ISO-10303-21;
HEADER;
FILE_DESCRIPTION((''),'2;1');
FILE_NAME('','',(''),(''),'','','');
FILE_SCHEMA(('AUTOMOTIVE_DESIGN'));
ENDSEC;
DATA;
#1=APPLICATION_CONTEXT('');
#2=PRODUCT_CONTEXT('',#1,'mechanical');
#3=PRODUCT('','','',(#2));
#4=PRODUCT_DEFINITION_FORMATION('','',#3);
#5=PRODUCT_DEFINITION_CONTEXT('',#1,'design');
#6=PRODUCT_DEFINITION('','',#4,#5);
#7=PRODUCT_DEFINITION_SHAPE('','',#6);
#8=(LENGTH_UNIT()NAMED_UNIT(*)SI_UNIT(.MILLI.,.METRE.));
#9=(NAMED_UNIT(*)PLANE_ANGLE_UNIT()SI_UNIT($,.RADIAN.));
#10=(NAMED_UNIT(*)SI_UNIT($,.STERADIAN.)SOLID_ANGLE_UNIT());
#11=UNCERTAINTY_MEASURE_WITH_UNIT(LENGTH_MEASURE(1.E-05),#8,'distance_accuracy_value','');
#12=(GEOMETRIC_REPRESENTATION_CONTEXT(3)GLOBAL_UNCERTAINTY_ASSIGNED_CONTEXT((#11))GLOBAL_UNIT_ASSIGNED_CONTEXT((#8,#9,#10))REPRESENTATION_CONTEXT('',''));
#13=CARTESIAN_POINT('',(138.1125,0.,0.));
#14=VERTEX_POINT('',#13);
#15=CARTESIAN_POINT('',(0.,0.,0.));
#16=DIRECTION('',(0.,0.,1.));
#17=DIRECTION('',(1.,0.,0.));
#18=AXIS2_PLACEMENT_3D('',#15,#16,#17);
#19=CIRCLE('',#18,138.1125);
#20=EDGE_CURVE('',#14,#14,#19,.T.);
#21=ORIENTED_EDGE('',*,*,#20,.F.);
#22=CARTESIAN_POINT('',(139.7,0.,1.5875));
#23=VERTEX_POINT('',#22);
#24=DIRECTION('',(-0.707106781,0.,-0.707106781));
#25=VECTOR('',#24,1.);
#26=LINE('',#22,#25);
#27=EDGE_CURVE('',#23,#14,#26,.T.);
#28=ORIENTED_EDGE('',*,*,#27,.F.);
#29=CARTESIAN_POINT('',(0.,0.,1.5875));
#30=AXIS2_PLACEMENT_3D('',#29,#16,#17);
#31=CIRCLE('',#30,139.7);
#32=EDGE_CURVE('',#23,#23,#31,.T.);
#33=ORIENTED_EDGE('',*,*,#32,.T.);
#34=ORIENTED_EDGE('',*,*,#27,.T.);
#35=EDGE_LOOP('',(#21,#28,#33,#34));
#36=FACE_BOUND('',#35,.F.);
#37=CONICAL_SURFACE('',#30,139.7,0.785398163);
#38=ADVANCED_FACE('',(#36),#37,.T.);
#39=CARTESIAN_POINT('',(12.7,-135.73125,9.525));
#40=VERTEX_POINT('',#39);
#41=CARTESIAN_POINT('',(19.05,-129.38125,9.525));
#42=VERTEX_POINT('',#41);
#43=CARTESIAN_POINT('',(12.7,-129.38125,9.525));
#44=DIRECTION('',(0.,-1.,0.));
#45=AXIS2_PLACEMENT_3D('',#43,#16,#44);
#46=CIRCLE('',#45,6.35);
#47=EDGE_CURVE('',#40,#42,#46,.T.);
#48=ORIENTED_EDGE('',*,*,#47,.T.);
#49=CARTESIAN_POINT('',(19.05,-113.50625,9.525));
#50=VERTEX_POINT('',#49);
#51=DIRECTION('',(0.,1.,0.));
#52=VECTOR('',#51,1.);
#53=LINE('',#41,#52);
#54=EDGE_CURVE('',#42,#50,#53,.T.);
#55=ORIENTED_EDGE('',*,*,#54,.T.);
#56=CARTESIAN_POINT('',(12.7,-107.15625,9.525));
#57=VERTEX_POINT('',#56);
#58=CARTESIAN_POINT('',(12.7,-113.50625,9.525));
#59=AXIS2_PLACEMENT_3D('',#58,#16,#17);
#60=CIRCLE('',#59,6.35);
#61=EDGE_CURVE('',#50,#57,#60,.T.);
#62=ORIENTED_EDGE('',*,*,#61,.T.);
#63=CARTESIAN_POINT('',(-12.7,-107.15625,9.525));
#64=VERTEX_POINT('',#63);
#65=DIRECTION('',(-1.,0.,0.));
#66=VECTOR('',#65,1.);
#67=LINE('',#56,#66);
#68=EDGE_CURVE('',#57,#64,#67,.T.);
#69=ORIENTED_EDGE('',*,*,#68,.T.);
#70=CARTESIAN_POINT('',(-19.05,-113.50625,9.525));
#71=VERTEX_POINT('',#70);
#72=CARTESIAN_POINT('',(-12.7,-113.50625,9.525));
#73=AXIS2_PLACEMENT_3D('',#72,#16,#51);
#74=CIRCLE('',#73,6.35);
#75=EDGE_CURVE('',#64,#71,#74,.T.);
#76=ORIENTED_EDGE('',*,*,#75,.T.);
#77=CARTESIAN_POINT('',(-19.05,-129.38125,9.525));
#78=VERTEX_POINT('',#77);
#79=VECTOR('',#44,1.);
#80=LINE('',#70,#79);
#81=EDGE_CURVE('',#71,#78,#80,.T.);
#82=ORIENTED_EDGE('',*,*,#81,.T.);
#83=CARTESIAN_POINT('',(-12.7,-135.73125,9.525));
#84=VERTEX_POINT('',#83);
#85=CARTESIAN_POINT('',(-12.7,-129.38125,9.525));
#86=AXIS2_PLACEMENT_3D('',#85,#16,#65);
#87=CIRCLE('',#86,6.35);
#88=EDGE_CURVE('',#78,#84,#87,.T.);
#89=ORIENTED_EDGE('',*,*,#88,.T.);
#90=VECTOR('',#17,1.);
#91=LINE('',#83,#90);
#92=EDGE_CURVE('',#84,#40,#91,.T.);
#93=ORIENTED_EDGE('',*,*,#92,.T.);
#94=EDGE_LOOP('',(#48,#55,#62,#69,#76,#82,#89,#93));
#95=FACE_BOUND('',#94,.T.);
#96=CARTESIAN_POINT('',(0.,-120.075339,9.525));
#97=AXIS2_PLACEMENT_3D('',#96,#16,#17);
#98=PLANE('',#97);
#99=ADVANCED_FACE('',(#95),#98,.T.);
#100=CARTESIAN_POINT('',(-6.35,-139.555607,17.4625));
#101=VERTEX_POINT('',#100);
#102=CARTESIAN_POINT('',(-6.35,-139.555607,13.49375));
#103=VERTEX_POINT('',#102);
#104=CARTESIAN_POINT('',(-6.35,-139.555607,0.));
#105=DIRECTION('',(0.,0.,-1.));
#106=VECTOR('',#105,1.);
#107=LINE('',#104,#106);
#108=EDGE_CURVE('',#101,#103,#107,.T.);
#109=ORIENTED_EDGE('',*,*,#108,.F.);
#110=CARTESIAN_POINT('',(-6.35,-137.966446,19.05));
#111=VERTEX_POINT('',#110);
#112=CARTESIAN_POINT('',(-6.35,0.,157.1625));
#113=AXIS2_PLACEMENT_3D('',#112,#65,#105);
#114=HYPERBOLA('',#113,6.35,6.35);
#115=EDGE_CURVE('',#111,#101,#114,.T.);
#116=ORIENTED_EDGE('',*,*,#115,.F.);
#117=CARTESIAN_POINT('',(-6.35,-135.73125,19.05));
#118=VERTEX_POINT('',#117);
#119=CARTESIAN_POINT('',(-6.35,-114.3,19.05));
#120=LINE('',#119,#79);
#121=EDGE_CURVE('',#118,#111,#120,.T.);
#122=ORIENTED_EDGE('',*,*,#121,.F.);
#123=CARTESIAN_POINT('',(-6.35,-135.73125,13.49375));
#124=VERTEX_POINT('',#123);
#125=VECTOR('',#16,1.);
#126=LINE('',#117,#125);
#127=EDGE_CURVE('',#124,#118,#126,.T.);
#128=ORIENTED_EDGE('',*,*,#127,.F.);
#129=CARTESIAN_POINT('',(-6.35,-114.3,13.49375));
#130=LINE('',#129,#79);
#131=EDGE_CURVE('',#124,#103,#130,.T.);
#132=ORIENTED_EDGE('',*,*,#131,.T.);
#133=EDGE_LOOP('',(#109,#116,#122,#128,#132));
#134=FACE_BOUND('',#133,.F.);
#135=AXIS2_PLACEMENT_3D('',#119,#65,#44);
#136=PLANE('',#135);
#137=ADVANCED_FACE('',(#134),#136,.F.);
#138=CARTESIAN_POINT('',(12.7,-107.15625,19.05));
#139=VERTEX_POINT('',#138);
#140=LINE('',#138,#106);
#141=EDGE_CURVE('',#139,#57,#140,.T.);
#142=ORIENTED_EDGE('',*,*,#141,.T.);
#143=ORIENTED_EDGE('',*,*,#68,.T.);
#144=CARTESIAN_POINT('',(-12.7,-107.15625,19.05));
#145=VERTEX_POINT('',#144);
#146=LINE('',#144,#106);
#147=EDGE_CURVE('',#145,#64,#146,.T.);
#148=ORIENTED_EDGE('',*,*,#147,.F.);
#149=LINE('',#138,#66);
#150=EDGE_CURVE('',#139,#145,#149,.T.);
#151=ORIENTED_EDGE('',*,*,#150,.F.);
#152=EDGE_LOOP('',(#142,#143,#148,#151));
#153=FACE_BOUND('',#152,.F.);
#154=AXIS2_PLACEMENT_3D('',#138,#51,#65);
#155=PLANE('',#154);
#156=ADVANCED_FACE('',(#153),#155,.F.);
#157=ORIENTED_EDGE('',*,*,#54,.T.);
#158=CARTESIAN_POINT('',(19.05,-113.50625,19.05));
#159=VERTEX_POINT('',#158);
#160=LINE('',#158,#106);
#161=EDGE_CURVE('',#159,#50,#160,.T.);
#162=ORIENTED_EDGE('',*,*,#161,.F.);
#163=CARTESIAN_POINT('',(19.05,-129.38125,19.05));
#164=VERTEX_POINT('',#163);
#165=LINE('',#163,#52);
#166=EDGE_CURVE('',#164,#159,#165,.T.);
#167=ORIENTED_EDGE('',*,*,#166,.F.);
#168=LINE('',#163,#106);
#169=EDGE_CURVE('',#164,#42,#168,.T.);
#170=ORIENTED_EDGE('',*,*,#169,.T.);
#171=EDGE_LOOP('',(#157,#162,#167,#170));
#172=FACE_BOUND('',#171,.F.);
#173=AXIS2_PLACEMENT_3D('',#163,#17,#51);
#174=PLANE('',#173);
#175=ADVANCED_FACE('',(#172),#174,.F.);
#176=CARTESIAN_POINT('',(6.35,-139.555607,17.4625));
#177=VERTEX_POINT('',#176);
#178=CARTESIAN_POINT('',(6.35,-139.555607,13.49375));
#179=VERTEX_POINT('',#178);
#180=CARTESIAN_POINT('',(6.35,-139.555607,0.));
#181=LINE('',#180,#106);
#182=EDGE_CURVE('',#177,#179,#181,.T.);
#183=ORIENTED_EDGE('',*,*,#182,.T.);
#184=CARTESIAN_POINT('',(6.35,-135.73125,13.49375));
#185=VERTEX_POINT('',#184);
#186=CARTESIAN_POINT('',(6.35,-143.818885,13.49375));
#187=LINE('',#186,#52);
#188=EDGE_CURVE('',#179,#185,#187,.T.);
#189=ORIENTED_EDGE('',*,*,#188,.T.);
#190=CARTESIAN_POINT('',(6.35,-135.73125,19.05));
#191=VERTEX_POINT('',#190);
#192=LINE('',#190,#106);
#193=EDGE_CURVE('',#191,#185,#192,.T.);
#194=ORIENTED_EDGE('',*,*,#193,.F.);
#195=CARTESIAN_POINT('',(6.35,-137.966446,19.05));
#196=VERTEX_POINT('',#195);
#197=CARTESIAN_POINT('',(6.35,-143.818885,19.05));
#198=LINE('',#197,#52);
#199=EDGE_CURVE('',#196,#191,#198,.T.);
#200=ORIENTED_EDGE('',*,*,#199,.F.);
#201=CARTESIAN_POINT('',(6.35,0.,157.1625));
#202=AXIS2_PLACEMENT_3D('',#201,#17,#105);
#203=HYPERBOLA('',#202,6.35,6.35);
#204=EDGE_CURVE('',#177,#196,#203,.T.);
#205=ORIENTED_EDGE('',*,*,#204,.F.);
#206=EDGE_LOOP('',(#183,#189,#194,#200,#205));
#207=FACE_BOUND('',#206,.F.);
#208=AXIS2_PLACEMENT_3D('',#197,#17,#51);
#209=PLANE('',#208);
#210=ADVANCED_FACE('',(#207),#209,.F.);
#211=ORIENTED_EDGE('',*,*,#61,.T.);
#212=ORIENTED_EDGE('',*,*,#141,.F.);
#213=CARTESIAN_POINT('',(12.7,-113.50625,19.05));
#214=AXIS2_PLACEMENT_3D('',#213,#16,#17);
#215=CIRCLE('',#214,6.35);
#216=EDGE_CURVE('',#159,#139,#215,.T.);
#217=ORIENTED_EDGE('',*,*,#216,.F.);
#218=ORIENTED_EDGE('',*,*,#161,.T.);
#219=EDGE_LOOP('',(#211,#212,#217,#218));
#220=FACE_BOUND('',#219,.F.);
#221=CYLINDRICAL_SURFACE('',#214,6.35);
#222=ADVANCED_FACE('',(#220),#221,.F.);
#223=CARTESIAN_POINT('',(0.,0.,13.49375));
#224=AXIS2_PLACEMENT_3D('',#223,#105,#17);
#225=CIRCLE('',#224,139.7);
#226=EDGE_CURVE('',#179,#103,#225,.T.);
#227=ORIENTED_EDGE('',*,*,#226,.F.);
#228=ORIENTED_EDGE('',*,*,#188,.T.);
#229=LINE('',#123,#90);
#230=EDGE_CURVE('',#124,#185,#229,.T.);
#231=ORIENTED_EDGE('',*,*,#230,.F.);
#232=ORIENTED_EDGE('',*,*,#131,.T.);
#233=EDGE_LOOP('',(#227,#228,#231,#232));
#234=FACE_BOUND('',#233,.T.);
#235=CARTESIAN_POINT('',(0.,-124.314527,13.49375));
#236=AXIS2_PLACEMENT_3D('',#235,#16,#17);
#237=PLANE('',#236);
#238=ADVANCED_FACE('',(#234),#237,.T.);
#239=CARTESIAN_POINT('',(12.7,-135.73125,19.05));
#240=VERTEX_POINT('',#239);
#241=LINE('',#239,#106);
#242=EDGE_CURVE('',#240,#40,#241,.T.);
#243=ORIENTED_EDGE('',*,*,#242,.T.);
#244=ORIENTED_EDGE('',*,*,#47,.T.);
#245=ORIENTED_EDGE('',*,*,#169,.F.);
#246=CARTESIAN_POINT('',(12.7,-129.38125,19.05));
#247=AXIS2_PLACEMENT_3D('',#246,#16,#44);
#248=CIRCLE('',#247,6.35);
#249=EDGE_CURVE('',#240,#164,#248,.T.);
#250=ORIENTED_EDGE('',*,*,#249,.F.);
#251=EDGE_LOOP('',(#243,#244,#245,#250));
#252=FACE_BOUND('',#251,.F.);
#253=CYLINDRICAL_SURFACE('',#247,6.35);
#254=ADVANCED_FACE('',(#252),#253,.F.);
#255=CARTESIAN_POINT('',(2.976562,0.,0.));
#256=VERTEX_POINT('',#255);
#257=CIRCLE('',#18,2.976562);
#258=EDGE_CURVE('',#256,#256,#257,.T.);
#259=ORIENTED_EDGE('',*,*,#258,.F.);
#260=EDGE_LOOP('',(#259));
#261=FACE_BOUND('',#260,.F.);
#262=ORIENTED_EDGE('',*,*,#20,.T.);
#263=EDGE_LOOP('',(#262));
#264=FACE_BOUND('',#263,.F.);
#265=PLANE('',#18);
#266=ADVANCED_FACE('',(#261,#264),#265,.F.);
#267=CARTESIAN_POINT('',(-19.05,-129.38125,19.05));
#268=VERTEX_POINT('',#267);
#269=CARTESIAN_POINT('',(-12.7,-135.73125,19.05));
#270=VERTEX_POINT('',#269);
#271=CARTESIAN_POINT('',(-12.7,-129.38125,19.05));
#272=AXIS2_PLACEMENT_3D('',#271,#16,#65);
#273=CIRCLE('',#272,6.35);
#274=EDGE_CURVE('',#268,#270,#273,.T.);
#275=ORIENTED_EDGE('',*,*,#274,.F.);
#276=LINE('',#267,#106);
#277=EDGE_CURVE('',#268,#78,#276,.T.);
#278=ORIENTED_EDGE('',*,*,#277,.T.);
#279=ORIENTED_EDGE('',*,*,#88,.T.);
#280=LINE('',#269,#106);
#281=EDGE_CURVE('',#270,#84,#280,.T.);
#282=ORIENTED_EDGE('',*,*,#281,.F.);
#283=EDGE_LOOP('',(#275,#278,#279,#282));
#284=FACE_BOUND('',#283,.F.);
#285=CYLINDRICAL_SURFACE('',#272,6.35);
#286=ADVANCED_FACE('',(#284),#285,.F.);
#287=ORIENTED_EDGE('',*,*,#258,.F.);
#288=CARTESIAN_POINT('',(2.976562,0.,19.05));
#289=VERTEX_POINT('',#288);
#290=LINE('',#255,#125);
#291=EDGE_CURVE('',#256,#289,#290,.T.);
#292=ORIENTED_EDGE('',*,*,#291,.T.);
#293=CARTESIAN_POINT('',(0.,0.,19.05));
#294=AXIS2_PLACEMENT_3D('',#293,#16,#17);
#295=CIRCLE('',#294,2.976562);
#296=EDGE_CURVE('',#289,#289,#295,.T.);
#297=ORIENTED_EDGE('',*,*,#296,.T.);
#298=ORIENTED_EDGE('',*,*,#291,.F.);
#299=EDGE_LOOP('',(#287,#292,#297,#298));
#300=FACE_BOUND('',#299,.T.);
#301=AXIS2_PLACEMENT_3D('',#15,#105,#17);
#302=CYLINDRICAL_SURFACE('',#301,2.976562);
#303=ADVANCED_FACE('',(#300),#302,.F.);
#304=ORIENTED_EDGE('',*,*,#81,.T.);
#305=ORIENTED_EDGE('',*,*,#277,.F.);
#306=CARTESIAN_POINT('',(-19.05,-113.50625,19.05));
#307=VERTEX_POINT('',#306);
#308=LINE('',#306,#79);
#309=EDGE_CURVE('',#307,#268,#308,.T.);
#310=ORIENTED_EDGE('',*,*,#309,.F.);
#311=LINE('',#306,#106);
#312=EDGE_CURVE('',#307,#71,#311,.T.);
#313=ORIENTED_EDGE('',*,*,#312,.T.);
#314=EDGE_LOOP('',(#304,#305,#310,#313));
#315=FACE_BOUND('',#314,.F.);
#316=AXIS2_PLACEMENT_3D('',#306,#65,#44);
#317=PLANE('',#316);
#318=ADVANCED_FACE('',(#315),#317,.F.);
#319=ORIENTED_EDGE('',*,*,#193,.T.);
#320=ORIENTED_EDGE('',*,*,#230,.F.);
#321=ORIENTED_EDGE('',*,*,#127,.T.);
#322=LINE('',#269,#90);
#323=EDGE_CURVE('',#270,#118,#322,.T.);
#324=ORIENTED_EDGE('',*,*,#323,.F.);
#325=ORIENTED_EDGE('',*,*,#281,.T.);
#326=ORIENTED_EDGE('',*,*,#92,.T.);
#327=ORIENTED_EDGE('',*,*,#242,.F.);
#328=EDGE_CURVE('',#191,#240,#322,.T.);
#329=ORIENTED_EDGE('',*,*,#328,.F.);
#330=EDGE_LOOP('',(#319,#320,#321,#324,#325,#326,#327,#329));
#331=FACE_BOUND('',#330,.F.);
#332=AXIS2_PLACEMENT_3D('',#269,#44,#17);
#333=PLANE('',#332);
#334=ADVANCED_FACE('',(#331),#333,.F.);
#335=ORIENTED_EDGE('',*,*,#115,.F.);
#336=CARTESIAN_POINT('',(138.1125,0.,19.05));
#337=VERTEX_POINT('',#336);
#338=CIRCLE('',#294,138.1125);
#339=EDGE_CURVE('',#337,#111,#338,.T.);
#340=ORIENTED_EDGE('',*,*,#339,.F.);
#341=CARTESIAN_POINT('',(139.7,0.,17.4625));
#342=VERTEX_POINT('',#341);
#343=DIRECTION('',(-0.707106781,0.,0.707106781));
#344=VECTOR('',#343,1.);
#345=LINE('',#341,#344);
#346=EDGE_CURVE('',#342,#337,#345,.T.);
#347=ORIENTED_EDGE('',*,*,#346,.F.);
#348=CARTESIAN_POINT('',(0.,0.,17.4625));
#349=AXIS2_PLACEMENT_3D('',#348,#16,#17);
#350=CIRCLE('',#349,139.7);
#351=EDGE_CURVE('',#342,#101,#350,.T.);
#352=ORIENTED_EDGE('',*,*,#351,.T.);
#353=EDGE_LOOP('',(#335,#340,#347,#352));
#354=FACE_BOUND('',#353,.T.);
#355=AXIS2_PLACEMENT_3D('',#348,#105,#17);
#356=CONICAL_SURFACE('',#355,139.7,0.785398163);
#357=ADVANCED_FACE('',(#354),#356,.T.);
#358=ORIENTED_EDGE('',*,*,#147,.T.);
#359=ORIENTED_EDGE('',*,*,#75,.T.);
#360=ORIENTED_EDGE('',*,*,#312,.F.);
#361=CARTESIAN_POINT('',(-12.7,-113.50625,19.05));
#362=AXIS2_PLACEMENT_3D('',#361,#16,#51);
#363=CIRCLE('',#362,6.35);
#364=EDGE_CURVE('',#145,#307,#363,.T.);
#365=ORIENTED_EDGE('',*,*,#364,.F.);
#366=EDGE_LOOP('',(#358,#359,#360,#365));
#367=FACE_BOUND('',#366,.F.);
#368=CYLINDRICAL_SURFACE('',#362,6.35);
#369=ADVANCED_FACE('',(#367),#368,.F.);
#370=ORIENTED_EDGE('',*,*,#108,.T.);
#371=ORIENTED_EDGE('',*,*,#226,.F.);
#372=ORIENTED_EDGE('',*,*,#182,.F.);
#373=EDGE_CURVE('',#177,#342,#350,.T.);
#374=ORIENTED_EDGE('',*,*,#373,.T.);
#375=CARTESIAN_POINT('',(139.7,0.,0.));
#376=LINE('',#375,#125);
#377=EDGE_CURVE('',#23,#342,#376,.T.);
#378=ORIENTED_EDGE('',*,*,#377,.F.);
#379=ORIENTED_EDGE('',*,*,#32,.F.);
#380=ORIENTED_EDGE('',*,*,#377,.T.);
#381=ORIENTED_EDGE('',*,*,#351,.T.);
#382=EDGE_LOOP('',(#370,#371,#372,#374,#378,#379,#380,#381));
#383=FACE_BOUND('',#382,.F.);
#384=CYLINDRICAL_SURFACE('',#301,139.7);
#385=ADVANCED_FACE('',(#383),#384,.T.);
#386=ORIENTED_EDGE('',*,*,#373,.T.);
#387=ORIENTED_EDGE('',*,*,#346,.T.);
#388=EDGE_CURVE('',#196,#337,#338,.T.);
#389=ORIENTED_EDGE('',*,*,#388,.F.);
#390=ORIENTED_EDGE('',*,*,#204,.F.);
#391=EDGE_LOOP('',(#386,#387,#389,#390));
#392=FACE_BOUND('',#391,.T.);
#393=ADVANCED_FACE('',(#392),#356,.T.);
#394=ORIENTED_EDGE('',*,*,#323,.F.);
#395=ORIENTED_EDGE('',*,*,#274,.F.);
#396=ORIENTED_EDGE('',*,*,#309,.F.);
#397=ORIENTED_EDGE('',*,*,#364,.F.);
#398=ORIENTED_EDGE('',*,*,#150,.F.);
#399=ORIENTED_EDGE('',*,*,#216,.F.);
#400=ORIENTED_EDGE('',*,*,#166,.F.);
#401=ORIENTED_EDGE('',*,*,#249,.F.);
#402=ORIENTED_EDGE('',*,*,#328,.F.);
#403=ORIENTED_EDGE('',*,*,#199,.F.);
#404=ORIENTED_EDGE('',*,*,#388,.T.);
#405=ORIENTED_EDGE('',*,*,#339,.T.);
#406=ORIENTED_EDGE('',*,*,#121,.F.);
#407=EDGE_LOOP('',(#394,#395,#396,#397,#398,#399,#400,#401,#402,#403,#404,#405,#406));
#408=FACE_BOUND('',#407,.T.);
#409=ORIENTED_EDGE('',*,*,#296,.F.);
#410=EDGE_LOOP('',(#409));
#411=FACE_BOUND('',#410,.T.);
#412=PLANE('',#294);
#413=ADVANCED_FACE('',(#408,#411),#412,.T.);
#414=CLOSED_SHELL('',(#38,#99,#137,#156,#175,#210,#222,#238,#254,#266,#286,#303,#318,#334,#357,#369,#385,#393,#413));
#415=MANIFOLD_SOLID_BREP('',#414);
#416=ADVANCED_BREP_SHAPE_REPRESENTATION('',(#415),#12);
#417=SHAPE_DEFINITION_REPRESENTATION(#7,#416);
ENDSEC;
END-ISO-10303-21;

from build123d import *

# Parameters (mm, degrees)
F2_R     = 139.7
F2_R_2   = 2.9765625
F3_DEPTH = 19.05
F4_SIZE  = 1.5875
F6_DEPTH = 5.55625
F8_DEPTH = 9.525


# Not quite as in the source:
# - a variable given as a bare number and used for a length is read in inches; the dataset says mm whatever the document's units were


with BuildPart() as f3:
    # F2 (on Top) → F3 (new body)
    with BuildSketch(Plane.XY):
        Circle(F2_R)
        Circle(F2_R_2, mode=Mode.SUBTRACT)
    extrude(amount=F3_DEPTH)

    # F4
    f4_edges = [f3.edges().sort_by_distance(p)[0] for p in [
        (-139.7, 0, 19.05),
        (-139.7, 0, 0),
    ]]
    chamfer(f4_edges, length=F4_SIZE)

    # F5 (on face) → F6 (cut)
    with BuildSketch(Plane.XY.offset(19.05)):
        with BuildLine():
            Line((6.35, -137.9664457622), (6.35, -114.2999987969))
            ThreePointArc((6.35, -114.2999987969), (-6.016e-07, -107.95), (-6.35, -114.3))
            Line((-6.35, -114.3), (-6.35, -137.9664457622))
            ThreePointArc((-6.35, -137.9664457622), (0, -138.1125), (6.35, -137.9664457622))
        make_face()
        with BuildLine():
            Line((6.35, -143.818885088), (6.35, -137.9664457622))
            ThreePointArc((6.35, -137.9664457622), (0, -138.1125), (-6.35, -137.9664457622))
            Line((-6.35, -137.9664457622), (-6.35, -143.818885088))
            Line((-6.35, -143.818885088), (6.35, -143.818885088))
        make_face()
    extrude(amount=-F6_DEPTH, mode=Mode.SUBTRACT)

    # F7 (on face) → F8 (cut)
    with BuildSketch(Plane.XY.offset(19.05)):
        with BuildLine():
            Line((12.7, -107.15625), (-12.7, -107.15625))
            ThreePointArc((-12.7, -107.15625), (-17.1901280605, -109.0161219395), (-19.05, -113.50625))
            Line((-19.05, -113.50625), (-19.05, -129.38125))
            ThreePointArc((-19.05, -129.38125), (-17.1901280605, -133.8713780605), (-12.7, -135.73125))
            Line((-12.7, -135.73125), (-6.35, -135.73125))
            Line((-6.35, -135.73125), (-6.35, -114.3))
            ThreePointArc((-6.35, -114.3), (-6.016e-07, -107.95), (6.35, -114.2999987969))
            Line((6.35, -114.2999987969), (6.35, -135.73125))
            Line((6.35, -135.73125), (12.7, -135.73125))
            ThreePointArc((12.7, -135.73125), (17.1901280605, -133.8713780605), (19.05, -129.38125))
            Line((19.05, -129.38125), (19.05, -113.50625))
            ThreePointArc((19.05, -113.50625), (17.1901280605, -109.0161219395), (12.7, -107.15625))
        make_face()
        with BuildLine():
            Line((-6.35, -114.3), (-6.35, -135.73125))
            Line((-6.35, -135.73125), (6.35, -135.73125))
            Line((6.35, -135.73125), (6.35, -114.2999987969))
            ThreePointArc((6.35, -114.2999987969), (-6.016e-07, -107.95), (-6.35, -114.3))
        make_face()
    extrude(amount=-F8_DEPTH, mode=Mode.SUBTRACT)


solid = f3.part
